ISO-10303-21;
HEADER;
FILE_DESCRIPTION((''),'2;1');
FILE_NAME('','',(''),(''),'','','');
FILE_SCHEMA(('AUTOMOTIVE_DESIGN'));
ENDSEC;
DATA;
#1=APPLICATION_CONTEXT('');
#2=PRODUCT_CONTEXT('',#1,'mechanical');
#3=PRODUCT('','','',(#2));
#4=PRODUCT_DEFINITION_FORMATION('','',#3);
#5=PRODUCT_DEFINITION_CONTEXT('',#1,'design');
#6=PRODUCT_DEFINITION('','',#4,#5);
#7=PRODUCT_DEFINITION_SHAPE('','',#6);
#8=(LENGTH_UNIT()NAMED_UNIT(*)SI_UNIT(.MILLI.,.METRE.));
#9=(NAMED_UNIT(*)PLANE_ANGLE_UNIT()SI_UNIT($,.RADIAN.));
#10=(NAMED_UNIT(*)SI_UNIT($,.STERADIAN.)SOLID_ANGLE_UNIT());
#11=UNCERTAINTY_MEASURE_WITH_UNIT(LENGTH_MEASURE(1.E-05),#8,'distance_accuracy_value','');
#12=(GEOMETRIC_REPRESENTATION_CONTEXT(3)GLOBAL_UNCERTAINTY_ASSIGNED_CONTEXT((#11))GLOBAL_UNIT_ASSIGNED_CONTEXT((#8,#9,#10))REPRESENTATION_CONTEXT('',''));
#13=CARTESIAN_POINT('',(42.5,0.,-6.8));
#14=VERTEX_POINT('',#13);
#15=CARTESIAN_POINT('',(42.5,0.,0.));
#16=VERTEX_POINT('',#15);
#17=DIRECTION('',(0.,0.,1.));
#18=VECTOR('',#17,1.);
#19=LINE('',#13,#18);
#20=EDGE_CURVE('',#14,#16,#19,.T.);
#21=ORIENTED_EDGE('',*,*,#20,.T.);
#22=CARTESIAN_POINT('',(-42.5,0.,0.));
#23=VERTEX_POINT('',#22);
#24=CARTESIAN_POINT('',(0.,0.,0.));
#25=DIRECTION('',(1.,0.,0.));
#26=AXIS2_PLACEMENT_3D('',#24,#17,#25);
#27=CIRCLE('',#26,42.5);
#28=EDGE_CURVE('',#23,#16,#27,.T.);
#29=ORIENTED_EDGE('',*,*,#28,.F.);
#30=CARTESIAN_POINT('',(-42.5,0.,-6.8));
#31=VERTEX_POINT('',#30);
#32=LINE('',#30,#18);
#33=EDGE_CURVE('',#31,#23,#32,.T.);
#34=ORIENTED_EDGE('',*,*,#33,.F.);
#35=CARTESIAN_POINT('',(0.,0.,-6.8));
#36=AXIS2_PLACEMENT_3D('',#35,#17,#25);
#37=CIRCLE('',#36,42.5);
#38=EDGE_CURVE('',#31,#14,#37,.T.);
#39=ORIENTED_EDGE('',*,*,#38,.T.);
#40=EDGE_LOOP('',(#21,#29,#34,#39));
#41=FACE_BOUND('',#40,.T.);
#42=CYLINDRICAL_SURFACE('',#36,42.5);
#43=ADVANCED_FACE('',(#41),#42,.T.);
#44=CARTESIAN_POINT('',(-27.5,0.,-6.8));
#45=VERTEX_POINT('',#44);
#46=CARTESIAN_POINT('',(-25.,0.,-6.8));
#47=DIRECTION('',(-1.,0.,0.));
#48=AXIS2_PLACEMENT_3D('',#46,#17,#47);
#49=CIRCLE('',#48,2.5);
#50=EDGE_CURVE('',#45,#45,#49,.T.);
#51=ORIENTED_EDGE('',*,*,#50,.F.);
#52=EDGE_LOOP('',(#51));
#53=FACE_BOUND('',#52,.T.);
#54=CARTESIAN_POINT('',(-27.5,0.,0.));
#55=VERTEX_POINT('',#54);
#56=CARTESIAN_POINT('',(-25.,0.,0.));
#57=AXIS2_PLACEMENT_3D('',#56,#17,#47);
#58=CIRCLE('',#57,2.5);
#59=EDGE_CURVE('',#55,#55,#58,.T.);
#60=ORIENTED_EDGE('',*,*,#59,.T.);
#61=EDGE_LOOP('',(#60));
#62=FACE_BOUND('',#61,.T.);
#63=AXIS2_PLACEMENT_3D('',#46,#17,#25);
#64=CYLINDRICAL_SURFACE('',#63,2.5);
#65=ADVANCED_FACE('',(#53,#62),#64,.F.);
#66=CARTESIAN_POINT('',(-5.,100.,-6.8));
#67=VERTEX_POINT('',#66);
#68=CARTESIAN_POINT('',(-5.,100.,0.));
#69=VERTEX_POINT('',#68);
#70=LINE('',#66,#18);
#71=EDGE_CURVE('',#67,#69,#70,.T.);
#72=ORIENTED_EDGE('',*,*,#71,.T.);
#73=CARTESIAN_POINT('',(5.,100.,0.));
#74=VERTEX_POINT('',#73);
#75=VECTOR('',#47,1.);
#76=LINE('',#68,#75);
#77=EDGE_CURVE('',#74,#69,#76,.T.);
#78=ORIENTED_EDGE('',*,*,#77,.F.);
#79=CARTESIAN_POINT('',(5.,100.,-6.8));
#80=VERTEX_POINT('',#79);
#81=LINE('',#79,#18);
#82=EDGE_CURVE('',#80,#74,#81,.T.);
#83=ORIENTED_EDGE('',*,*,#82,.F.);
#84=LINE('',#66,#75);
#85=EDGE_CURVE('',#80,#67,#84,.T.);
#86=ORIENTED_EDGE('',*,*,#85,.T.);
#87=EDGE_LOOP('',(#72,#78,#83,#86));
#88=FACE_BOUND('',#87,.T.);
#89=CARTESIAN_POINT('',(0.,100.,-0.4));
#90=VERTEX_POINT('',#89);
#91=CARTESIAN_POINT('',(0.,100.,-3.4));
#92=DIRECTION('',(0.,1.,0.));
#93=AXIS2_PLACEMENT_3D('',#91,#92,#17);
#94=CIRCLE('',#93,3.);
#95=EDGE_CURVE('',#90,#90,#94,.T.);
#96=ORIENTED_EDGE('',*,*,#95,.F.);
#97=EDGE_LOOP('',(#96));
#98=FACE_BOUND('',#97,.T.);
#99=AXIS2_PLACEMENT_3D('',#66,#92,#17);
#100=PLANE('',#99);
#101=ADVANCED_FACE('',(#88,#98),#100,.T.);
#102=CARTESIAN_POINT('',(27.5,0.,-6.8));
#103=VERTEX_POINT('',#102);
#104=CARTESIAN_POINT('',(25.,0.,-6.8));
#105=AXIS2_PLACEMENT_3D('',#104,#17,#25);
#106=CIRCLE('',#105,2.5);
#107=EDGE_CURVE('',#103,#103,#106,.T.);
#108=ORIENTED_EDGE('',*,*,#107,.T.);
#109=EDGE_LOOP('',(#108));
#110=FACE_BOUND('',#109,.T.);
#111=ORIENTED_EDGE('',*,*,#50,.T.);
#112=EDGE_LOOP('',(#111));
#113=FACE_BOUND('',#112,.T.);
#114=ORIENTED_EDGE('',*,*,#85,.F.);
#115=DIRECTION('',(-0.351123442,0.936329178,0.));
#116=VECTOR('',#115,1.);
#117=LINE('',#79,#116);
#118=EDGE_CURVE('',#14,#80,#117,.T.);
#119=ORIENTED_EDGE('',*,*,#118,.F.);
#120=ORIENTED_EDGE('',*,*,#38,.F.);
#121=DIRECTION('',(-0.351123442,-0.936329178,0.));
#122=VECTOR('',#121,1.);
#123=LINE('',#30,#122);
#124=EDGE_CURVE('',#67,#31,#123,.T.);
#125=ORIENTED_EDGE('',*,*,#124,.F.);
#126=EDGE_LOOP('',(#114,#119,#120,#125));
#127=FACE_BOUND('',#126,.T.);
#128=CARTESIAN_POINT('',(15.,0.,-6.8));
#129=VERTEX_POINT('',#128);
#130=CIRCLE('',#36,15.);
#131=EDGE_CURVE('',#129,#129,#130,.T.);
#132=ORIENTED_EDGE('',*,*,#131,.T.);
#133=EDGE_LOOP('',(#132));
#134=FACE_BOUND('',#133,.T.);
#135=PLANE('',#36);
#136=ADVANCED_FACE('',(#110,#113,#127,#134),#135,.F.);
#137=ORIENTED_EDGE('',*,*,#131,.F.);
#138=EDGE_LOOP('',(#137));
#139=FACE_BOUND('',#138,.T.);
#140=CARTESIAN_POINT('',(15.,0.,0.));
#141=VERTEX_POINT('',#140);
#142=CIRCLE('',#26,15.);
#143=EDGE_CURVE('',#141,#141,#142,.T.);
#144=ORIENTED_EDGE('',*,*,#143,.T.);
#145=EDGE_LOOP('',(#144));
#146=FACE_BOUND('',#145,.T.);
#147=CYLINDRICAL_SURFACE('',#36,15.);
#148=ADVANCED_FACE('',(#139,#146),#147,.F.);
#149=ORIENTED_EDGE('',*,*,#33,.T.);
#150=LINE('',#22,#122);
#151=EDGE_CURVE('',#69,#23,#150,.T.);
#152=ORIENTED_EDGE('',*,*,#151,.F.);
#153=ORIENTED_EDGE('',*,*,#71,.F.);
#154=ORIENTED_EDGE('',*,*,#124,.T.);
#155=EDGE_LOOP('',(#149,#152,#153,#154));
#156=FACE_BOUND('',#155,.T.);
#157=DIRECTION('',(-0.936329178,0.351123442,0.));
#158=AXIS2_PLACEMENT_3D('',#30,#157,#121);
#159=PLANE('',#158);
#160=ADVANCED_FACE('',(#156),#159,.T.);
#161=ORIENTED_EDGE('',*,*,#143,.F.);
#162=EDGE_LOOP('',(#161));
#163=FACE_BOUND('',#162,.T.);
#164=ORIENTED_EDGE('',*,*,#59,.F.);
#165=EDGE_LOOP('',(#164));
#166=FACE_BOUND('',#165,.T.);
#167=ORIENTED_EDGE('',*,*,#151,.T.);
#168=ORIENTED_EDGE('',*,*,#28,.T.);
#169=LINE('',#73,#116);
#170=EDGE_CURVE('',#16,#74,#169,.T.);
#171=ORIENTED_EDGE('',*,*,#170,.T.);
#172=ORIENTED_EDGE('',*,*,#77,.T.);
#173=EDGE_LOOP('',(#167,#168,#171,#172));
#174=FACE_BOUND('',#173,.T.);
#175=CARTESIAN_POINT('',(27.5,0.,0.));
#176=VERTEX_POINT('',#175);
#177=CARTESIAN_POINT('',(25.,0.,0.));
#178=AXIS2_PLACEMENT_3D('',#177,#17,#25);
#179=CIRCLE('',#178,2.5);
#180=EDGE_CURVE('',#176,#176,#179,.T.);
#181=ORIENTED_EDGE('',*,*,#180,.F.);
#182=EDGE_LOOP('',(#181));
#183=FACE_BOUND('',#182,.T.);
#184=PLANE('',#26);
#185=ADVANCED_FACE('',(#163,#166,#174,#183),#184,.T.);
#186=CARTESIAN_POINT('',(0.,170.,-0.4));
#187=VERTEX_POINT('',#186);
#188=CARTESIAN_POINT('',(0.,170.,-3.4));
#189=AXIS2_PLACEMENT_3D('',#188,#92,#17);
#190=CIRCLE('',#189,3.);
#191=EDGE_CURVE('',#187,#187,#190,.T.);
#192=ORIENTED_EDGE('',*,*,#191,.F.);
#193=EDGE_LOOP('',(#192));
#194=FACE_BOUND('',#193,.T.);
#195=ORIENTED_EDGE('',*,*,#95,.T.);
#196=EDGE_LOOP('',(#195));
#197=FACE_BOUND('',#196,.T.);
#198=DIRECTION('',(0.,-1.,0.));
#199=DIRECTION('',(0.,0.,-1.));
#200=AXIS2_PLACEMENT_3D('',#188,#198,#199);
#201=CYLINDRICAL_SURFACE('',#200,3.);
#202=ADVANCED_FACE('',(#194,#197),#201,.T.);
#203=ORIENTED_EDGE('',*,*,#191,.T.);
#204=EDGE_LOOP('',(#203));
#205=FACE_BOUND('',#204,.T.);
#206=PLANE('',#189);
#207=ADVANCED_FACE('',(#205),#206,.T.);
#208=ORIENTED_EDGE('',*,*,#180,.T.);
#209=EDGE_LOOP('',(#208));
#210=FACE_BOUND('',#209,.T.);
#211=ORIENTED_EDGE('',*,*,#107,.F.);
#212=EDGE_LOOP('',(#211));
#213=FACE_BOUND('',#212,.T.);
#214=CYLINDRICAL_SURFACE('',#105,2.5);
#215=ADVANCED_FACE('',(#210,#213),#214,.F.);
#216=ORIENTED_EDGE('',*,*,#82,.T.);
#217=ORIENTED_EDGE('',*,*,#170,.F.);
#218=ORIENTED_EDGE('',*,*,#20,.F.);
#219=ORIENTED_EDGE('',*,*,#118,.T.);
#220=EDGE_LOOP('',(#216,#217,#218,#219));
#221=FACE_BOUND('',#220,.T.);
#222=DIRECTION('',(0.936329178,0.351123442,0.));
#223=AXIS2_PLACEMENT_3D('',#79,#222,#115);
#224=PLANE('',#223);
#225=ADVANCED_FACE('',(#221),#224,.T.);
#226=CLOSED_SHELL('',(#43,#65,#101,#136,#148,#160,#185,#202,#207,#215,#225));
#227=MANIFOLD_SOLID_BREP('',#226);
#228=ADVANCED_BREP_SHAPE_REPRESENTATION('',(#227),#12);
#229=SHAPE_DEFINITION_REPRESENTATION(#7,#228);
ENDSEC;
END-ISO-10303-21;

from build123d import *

# Parameters (mm, degrees)
SKETCH1_R           = 15
SKETCH1_R_2         = 2.5
BASE_FLANGE1_DEPTH  = 6.8
SKETCH6_R           = 3
BOSS_EXTRUDE1_DEPTH = 70


# Sheet-metal steps are written as plain solids
with BuildPart() as part:
    # Sketch1 → Base-Flange1 (new body)
    with BuildSketch(Plane.XY):
        with BuildLine():
            Line((-42.5, 0), (-5, 100))
            Line((-5, 100), (5, 100))
            Line((5, 100), (42.5, 0))
            ThreePointArc((42.5, 0), (0, -42.5), (-42.5, 0))
        make_face()
        Circle(SKETCH1_R, mode=Mode.SUBTRACT)
        with Locations((25, 0)):
            Circle(SKETCH1_R_2, mode=Mode.SUBTRACT)
        with Locations(Location((-25, 0, 0), (0, 0, 180))):
            Circle(SKETCH1_R_2, mode=Mode.SUBTRACT)
    extrude(amount=-BASE_FLANGE1_DEPTH)

    # Sketch6 → Boss-Extrude1 (add)
    with BuildSketch(Plane(origin=(0, 100, 0), x_dir=(1, 0, 0), z_dir=(0, 1, 0))):
        with Locations(Location((0, 3.4, 0), (0, 0, 270))):
            Circle(SKETCH6_R)
    extrude(amount=BOSS_EXTRUDE1_DEPTH)


solid = part.part
